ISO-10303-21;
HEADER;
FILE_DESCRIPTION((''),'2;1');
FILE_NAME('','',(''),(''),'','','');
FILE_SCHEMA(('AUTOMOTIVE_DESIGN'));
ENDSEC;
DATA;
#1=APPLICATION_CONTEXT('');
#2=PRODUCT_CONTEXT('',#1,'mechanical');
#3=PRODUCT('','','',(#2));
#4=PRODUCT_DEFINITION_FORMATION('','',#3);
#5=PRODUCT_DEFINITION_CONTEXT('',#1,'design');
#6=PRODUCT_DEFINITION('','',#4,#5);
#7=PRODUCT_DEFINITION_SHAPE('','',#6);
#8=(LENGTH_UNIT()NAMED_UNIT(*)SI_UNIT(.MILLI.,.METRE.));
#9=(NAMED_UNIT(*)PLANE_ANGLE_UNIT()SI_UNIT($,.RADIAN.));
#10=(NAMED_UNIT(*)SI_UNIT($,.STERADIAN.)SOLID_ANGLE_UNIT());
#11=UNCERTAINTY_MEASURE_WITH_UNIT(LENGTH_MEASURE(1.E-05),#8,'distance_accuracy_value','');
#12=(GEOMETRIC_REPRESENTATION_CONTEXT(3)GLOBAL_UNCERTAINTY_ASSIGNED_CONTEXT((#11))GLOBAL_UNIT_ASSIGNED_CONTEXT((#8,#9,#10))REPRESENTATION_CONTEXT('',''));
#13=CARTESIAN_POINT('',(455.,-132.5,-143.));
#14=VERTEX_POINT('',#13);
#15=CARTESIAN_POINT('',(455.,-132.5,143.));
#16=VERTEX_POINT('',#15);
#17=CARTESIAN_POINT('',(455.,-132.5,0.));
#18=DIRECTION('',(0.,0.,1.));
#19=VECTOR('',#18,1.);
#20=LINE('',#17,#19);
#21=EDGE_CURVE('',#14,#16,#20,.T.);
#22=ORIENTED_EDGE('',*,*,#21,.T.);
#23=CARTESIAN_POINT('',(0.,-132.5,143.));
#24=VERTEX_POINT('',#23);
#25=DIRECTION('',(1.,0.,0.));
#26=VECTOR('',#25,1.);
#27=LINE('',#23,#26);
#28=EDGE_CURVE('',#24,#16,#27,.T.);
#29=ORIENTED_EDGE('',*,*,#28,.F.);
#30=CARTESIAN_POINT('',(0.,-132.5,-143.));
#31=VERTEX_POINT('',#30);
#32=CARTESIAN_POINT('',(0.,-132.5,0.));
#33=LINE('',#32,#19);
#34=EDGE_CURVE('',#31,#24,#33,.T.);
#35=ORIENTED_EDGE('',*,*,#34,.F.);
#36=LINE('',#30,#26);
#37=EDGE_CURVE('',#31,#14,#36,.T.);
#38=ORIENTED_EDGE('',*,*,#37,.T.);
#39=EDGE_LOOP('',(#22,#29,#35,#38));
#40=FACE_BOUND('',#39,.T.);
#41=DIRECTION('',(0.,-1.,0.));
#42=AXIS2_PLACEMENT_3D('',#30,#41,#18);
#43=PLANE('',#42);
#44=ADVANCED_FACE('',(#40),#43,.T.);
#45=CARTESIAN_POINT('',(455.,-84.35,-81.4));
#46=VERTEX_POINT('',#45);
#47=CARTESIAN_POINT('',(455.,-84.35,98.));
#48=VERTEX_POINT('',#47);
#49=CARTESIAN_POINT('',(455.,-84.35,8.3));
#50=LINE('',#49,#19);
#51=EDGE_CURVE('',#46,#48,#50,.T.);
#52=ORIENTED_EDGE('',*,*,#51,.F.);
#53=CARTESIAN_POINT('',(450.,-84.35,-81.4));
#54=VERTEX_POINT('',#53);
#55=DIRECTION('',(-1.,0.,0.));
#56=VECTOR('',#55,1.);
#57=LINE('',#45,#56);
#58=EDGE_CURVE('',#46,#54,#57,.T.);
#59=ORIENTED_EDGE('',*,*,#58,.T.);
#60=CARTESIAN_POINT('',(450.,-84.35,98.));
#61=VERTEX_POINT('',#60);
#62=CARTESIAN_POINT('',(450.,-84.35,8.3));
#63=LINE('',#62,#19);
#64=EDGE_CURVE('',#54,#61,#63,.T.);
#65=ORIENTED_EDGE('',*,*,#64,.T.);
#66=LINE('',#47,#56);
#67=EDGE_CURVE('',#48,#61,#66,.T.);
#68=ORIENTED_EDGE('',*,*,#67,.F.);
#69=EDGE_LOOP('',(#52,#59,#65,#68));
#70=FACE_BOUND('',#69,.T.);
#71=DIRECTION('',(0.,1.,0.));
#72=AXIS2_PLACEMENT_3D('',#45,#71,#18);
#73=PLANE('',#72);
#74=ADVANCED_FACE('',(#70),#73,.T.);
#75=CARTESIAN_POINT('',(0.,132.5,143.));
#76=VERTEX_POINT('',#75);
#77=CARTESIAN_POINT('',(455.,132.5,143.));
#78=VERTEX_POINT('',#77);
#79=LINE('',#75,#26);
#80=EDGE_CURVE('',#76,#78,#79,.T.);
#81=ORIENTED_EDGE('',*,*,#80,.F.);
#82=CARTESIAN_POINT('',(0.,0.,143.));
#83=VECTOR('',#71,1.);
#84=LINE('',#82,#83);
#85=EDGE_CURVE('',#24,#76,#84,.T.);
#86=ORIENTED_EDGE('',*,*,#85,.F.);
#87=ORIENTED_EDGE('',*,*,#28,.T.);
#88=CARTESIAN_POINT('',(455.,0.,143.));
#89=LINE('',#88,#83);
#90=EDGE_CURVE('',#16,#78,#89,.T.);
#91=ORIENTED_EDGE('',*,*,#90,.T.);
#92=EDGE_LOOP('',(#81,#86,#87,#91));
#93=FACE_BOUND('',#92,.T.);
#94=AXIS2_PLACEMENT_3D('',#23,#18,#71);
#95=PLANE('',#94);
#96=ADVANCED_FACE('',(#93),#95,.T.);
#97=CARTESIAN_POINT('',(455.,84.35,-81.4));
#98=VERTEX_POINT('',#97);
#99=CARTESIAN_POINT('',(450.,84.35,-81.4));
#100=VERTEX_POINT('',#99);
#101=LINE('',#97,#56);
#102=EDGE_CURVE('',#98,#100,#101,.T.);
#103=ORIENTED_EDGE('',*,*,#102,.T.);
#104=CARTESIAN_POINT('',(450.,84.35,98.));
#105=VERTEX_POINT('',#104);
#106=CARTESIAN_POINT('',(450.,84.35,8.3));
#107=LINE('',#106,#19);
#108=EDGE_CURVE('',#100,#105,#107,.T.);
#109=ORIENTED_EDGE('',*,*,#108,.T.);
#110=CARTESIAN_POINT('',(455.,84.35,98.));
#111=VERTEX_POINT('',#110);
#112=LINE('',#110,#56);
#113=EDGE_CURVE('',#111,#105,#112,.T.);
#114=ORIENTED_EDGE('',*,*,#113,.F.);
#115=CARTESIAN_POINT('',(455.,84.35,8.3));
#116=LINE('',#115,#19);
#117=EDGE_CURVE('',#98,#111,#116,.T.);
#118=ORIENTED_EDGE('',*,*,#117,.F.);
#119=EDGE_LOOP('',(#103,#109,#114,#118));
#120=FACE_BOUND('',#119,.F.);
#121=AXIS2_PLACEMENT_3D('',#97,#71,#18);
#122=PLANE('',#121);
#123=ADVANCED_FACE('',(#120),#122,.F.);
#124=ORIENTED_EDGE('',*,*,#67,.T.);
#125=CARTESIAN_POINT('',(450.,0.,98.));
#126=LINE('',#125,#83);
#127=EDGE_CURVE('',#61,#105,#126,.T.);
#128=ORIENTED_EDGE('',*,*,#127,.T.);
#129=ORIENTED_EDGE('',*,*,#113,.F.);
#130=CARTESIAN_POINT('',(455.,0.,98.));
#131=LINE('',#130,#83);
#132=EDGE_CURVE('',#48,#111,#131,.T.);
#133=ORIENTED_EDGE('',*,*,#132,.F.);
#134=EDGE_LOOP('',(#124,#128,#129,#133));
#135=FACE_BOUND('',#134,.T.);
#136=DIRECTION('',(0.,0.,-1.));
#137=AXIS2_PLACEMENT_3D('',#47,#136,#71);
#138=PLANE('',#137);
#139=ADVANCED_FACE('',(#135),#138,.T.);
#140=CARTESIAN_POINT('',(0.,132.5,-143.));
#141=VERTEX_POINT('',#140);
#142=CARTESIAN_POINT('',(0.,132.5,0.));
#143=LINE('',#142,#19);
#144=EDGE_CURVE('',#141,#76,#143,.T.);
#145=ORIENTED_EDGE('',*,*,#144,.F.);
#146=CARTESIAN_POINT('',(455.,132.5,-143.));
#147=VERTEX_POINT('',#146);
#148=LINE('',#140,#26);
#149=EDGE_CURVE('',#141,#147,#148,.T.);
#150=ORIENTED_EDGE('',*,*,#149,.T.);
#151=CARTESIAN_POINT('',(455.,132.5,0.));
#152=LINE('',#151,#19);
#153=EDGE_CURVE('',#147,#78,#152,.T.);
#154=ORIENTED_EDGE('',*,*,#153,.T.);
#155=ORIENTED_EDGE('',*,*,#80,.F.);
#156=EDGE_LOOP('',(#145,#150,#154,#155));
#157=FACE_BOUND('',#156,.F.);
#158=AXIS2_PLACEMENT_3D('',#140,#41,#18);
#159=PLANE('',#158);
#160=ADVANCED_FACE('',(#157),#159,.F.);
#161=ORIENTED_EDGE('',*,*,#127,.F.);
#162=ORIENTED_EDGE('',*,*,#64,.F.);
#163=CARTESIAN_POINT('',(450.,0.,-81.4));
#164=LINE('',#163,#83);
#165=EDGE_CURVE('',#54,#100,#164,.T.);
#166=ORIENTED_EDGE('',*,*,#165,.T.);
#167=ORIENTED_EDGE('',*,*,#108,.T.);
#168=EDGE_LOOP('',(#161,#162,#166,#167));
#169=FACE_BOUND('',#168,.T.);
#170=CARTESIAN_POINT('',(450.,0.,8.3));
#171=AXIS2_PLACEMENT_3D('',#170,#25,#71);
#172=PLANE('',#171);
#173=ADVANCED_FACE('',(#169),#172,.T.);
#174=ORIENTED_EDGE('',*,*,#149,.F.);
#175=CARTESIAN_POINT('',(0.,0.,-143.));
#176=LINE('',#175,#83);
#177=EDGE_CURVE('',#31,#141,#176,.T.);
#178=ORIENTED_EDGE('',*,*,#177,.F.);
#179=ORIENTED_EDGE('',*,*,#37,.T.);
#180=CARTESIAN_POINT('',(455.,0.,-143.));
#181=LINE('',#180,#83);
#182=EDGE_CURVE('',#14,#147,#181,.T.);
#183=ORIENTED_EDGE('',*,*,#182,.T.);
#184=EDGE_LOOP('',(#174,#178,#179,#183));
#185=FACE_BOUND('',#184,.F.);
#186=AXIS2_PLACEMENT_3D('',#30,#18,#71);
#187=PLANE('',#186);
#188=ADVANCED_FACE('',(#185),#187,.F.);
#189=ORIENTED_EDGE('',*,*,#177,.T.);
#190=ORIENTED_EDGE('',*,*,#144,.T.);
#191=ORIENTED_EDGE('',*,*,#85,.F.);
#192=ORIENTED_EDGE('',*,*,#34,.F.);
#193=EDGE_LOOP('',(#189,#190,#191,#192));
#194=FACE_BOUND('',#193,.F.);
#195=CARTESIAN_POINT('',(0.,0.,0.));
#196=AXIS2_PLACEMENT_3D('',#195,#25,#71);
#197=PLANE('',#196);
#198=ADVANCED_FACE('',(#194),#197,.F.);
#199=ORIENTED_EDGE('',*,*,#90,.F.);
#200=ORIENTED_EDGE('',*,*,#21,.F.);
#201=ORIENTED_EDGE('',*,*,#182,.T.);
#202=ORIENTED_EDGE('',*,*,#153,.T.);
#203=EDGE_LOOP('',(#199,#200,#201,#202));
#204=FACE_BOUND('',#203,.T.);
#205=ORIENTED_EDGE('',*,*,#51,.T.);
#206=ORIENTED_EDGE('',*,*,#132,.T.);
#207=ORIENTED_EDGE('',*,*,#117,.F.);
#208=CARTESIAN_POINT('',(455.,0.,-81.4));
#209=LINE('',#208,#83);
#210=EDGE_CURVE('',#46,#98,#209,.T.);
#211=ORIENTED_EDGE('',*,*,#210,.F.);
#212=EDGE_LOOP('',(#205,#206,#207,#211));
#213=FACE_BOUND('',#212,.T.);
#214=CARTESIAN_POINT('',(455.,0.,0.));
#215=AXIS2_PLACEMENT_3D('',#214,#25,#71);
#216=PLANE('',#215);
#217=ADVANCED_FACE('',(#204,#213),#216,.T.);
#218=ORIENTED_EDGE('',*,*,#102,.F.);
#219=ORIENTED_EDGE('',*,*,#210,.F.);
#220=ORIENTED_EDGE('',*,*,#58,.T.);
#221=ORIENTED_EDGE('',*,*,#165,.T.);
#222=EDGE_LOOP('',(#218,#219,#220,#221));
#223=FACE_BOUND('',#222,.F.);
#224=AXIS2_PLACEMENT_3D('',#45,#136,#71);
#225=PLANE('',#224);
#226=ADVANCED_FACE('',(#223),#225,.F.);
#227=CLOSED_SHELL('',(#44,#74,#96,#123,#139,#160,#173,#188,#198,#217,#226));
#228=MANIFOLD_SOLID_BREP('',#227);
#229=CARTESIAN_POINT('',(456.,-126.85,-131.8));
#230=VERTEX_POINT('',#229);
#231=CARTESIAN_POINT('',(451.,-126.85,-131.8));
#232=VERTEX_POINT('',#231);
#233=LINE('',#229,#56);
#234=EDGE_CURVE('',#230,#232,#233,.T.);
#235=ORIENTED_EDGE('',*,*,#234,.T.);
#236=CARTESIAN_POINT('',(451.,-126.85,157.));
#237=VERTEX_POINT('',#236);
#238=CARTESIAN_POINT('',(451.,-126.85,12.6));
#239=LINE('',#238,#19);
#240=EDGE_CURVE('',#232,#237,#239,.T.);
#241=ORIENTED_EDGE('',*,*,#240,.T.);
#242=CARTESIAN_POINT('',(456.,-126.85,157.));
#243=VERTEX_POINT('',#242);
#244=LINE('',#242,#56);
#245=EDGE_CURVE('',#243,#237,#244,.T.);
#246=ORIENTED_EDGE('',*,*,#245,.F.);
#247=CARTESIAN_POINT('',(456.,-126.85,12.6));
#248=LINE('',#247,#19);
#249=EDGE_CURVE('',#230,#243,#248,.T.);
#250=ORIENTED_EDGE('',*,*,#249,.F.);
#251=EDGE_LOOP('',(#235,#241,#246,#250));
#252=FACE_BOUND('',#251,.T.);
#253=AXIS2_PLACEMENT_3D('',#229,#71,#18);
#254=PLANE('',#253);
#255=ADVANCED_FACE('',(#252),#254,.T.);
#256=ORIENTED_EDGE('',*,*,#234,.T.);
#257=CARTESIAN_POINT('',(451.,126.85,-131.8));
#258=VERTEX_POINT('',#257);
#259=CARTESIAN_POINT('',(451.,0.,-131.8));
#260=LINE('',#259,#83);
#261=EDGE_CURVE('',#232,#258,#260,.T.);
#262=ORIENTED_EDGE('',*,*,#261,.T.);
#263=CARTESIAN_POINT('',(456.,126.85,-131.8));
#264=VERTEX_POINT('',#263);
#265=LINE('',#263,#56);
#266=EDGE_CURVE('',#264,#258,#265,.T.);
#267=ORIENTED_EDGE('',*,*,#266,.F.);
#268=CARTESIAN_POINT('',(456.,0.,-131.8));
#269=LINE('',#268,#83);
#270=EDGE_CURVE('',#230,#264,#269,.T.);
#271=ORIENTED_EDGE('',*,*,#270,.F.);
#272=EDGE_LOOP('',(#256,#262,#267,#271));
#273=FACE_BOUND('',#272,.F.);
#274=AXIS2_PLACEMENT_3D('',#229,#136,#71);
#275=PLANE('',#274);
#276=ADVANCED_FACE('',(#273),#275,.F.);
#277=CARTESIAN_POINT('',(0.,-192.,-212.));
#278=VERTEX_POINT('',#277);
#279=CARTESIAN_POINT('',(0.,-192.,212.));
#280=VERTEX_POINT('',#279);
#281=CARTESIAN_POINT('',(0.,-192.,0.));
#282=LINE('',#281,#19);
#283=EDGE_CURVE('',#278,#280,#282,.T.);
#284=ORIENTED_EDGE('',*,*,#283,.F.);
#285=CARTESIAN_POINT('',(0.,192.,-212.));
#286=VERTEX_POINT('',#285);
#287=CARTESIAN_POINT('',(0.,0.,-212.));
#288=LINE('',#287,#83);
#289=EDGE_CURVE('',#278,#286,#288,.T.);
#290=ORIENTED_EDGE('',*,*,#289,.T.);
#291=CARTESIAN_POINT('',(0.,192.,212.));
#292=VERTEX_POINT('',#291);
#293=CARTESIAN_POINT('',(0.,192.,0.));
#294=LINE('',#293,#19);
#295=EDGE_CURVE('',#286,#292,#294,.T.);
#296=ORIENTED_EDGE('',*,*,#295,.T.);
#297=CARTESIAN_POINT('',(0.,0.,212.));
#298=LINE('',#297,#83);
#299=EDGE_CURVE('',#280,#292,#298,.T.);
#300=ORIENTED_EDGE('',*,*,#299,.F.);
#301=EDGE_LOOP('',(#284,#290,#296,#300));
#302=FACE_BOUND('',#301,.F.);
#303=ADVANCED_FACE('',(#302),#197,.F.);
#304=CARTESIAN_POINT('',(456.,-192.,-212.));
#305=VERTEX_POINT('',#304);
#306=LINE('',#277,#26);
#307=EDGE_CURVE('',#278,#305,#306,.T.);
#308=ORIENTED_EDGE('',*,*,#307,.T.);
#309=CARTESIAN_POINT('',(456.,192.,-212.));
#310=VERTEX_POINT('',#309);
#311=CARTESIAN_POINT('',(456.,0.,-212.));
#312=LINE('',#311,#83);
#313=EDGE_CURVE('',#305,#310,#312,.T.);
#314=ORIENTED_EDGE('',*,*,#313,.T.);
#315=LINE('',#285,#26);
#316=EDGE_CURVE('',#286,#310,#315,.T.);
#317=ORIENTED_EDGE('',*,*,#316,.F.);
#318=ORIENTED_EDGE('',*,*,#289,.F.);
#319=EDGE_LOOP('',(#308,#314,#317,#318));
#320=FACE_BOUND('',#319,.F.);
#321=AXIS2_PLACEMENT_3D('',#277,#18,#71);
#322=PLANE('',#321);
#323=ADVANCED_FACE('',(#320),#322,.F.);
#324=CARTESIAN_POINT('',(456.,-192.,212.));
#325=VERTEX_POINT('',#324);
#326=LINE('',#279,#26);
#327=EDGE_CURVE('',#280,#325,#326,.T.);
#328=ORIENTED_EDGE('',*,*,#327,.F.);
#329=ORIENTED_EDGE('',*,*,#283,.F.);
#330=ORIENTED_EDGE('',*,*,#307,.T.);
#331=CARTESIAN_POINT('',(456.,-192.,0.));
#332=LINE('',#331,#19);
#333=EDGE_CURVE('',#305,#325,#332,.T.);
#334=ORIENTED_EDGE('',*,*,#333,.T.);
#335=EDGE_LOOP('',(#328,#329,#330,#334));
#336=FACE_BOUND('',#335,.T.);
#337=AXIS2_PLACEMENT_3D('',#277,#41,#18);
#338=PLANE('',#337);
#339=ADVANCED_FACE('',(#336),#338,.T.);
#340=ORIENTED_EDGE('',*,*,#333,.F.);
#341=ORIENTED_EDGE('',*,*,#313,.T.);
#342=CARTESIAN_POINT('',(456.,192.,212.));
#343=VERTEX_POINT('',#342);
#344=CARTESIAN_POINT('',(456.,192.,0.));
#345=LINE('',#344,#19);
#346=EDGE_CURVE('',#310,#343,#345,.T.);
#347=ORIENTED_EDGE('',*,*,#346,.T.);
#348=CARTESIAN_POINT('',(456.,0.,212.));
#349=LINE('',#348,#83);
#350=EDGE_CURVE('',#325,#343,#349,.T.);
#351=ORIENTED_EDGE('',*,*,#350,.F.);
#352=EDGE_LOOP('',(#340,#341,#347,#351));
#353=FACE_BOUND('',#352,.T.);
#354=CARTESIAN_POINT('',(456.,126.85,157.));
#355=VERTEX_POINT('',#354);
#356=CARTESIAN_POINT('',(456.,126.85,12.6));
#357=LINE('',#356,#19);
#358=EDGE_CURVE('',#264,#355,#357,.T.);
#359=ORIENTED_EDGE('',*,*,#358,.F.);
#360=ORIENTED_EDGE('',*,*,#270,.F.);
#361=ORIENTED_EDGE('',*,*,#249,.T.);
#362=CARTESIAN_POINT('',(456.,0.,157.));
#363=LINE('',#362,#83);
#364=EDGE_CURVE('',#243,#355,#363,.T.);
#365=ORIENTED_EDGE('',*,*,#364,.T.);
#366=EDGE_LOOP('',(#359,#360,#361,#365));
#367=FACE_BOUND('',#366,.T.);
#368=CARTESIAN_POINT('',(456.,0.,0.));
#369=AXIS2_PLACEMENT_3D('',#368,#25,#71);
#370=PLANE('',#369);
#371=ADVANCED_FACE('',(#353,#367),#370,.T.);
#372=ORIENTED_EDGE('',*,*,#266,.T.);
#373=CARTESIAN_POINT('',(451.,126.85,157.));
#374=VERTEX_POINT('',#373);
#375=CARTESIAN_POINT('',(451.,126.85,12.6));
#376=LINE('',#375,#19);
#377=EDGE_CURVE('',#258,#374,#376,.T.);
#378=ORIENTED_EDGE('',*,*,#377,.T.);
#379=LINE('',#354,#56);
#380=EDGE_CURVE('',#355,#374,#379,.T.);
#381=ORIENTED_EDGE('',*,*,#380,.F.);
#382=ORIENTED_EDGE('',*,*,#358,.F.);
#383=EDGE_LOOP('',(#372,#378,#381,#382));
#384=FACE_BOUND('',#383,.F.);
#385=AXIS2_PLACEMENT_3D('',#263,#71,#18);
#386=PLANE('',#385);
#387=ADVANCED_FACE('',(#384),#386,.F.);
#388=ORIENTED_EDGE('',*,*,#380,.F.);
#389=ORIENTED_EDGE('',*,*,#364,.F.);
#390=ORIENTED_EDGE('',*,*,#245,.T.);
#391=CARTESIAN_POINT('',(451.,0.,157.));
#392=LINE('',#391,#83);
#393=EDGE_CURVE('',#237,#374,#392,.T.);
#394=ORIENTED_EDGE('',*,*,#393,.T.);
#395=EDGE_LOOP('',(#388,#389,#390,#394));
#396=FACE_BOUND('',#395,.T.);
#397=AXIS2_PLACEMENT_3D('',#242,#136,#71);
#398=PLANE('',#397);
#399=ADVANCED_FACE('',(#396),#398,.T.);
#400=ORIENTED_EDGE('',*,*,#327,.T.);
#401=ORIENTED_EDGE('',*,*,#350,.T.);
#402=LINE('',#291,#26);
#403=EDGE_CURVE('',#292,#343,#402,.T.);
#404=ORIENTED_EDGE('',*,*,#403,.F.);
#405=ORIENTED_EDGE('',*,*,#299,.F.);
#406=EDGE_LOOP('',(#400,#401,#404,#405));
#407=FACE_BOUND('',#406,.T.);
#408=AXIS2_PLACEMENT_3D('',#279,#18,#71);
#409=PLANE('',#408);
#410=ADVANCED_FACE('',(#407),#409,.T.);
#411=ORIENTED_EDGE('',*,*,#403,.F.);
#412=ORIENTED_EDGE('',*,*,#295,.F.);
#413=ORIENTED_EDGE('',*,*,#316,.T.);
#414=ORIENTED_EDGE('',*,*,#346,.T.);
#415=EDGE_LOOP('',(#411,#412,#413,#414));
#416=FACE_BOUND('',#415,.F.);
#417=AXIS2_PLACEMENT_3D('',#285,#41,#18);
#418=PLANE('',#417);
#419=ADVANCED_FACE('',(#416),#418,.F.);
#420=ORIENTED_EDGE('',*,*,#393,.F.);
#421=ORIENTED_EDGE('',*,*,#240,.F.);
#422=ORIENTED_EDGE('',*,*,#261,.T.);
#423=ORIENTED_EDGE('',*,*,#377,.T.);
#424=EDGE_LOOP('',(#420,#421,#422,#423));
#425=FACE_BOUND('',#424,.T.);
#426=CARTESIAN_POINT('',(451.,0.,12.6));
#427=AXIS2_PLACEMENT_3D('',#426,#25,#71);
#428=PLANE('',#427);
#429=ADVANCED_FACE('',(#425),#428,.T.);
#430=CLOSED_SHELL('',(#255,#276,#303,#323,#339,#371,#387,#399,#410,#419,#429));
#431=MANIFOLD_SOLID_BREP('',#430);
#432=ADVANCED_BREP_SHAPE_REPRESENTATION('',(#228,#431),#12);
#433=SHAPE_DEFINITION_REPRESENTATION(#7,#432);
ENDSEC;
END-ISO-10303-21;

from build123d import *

# Parameters (mm, degrees)
F0_W     = 265
F0_H     = 286
F1_DEPTH = 455
F2_W     = 168.7
F2_H     = 179.4
F3_DEPTH = 5
F4_W     = 384
F4_H     = 424
F5_DEPTH = 456
F6_W     = 253.7
F6_H     = 288.8
F7_DEPTH = 5


with BuildPart() as f1:
    # F0 (on Right) → F1 (new body)
    with BuildSketch(Plane.YZ):
        Rectangle(F0_W, F0_H)
    extrude(amount=F1_DEPTH)

    # F2 (on face) → F3 (cut)
    with BuildSketch(Plane.YZ.offset(455)):
        with Locations((0, 8.3)):
            Rectangle(F2_W, F2_H)
    extrude(amount=-F3_DEPTH, mode=Mode.SUBTRACT)


with BuildPart() as f5:
    # F4 (on Right) → F5 (new body)
    with BuildSketch(Plane.YZ):
        Rectangle(F4_W, F4_H)
    extrude(amount=F5_DEPTH)

    # F6 (on face) → F7 (cut)
    with BuildSketch(Plane.YZ.offset(456)):
        with Locations((0, 12.6)):
            Rectangle(F6_W, F6_H)
    extrude(amount=-F7_DEPTH, mode=Mode.SUBTRACT)


solid = Compound([f1.part, f5.part])
